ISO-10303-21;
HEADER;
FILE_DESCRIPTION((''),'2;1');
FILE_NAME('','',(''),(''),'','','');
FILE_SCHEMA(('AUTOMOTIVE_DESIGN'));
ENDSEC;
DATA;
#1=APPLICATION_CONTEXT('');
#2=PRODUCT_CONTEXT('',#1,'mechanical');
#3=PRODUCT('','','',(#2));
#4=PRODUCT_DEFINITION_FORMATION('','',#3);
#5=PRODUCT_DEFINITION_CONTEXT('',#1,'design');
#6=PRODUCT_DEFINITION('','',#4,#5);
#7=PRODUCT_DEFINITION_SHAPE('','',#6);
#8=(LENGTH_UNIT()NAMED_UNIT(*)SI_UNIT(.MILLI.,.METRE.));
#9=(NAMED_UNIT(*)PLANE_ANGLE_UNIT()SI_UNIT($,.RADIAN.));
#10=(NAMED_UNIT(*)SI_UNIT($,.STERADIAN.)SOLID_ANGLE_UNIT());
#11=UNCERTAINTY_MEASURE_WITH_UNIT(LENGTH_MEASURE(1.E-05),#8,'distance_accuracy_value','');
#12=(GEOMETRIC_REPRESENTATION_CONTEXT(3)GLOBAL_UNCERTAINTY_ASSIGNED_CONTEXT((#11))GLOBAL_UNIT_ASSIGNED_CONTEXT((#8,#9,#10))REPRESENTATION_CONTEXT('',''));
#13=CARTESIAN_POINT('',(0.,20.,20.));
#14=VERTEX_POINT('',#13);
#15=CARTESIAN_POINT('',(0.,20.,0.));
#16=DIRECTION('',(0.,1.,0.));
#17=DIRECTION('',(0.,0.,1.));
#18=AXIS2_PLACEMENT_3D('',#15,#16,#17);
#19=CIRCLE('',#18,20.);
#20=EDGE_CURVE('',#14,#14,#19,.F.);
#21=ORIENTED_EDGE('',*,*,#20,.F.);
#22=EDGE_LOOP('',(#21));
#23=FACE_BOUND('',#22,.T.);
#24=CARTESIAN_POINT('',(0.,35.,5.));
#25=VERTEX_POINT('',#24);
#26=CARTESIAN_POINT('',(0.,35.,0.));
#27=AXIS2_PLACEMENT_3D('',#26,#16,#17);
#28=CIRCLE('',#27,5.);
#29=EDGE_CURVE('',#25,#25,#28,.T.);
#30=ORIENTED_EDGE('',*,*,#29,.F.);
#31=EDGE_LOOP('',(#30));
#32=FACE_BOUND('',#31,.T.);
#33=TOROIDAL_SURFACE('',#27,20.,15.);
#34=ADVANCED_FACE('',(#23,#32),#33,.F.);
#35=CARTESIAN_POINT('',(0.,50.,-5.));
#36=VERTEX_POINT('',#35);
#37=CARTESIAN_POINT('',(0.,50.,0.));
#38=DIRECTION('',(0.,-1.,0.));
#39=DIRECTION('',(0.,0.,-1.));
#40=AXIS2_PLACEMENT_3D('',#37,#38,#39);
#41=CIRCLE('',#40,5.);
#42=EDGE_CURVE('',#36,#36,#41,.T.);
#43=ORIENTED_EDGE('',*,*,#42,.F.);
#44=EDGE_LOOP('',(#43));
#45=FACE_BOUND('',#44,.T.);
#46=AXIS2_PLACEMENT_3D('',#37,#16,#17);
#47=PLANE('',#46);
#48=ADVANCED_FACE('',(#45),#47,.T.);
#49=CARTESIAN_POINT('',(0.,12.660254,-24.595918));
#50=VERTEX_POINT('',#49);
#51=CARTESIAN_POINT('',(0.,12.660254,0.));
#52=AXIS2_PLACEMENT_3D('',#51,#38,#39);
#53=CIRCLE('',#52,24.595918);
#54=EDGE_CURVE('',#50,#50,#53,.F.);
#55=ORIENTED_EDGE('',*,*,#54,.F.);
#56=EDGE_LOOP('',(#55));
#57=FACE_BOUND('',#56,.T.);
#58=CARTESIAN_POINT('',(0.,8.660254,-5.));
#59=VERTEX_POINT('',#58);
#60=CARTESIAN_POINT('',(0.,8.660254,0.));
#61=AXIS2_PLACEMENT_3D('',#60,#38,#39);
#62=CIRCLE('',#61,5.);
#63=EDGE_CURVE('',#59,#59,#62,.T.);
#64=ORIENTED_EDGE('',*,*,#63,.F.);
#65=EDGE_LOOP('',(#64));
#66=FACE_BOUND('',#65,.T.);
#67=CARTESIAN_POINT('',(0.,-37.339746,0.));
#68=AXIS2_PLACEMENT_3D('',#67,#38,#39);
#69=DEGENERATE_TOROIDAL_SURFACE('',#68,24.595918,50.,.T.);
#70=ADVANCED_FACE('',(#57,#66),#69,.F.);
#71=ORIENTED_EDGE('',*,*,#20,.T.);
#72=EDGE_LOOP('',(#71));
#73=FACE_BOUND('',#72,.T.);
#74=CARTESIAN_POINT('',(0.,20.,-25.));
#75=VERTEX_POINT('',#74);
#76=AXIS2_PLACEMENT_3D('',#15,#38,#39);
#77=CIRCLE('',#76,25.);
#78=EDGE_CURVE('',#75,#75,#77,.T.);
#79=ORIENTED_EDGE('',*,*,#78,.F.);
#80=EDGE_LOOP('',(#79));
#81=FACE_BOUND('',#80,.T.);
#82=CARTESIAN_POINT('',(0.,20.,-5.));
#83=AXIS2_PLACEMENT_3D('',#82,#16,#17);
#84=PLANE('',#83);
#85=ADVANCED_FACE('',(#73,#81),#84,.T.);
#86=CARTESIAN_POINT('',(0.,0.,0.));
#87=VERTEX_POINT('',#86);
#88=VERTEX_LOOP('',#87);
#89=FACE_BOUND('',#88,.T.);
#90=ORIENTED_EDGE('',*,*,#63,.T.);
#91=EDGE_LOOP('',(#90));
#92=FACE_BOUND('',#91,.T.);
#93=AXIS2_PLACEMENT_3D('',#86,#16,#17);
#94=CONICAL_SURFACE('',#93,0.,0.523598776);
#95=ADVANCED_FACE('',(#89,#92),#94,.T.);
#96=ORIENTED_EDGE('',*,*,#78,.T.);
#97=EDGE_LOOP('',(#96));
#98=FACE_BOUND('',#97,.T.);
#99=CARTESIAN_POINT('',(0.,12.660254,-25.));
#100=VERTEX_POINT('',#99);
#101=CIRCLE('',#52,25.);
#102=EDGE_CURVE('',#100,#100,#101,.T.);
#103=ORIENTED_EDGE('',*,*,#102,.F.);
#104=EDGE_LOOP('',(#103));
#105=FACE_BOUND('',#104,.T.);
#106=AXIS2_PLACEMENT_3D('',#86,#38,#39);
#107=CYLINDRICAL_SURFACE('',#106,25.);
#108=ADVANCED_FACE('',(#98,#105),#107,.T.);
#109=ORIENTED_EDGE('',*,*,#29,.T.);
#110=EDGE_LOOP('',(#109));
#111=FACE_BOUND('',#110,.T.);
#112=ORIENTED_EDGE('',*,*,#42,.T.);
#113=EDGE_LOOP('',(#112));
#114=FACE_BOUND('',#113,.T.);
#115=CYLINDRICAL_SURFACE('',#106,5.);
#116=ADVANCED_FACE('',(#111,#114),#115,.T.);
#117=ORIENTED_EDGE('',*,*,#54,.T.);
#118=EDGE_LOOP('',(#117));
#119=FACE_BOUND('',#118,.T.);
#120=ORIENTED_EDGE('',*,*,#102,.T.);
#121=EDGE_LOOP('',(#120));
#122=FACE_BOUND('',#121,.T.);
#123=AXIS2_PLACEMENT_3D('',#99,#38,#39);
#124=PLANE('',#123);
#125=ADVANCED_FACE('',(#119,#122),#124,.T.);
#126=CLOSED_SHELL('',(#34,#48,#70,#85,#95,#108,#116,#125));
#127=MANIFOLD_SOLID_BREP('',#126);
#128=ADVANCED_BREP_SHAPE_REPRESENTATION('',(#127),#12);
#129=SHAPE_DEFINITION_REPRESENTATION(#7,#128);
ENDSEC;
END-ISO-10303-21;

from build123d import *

# Parameters (mm, degrees)
FILLET1_R = 50
FILLET2_R = 15


with BuildPart() as part:
    # Sketch2 → Revolve1 (revolve)
    with BuildSketch(Plane(origin=(0, 0, 0), x_dir=(0, 0, -1), z_dir=(1, 0, 0))):
        Polygon((0, 0), (0, 50), (5, 50), (5, 20), (25, 20), (25, 12.660254038), (5, 12.660254038), (5, 8.660254038), align=None)
    revolve(axis=Axis((0, 0, 0), (0, 1, 0)))

    # Fillet1
    # the kernel refuses this fillet: 50 mm, written as the material it adds along each edge
    with BuildSketch(Plane(origin=(0, 12.660254038, 0), x_dir=(0, 0, -1), z_dir=(1, 0, 0))) as fillet1_piece_1:
        with BuildLine():
            CenterArc((24.595917942, -50), FILLET1_R, 90, 23.073918066)
            Line((5, -4), (5, 0))
            Line((5, 0), (24.595917942, 0))
        make_face()
    revolve(axis=Axis((0, 12.660254038, 0), (0, 1, 0)))

    # Fillet2
    fillet2_edges = [part.edges().sort_by_distance(p)[0] for p in [
        (0, 20, 5),
    ]]
    fillet(fillet2_edges, radius=FILLET2_R)


solid = part.part
